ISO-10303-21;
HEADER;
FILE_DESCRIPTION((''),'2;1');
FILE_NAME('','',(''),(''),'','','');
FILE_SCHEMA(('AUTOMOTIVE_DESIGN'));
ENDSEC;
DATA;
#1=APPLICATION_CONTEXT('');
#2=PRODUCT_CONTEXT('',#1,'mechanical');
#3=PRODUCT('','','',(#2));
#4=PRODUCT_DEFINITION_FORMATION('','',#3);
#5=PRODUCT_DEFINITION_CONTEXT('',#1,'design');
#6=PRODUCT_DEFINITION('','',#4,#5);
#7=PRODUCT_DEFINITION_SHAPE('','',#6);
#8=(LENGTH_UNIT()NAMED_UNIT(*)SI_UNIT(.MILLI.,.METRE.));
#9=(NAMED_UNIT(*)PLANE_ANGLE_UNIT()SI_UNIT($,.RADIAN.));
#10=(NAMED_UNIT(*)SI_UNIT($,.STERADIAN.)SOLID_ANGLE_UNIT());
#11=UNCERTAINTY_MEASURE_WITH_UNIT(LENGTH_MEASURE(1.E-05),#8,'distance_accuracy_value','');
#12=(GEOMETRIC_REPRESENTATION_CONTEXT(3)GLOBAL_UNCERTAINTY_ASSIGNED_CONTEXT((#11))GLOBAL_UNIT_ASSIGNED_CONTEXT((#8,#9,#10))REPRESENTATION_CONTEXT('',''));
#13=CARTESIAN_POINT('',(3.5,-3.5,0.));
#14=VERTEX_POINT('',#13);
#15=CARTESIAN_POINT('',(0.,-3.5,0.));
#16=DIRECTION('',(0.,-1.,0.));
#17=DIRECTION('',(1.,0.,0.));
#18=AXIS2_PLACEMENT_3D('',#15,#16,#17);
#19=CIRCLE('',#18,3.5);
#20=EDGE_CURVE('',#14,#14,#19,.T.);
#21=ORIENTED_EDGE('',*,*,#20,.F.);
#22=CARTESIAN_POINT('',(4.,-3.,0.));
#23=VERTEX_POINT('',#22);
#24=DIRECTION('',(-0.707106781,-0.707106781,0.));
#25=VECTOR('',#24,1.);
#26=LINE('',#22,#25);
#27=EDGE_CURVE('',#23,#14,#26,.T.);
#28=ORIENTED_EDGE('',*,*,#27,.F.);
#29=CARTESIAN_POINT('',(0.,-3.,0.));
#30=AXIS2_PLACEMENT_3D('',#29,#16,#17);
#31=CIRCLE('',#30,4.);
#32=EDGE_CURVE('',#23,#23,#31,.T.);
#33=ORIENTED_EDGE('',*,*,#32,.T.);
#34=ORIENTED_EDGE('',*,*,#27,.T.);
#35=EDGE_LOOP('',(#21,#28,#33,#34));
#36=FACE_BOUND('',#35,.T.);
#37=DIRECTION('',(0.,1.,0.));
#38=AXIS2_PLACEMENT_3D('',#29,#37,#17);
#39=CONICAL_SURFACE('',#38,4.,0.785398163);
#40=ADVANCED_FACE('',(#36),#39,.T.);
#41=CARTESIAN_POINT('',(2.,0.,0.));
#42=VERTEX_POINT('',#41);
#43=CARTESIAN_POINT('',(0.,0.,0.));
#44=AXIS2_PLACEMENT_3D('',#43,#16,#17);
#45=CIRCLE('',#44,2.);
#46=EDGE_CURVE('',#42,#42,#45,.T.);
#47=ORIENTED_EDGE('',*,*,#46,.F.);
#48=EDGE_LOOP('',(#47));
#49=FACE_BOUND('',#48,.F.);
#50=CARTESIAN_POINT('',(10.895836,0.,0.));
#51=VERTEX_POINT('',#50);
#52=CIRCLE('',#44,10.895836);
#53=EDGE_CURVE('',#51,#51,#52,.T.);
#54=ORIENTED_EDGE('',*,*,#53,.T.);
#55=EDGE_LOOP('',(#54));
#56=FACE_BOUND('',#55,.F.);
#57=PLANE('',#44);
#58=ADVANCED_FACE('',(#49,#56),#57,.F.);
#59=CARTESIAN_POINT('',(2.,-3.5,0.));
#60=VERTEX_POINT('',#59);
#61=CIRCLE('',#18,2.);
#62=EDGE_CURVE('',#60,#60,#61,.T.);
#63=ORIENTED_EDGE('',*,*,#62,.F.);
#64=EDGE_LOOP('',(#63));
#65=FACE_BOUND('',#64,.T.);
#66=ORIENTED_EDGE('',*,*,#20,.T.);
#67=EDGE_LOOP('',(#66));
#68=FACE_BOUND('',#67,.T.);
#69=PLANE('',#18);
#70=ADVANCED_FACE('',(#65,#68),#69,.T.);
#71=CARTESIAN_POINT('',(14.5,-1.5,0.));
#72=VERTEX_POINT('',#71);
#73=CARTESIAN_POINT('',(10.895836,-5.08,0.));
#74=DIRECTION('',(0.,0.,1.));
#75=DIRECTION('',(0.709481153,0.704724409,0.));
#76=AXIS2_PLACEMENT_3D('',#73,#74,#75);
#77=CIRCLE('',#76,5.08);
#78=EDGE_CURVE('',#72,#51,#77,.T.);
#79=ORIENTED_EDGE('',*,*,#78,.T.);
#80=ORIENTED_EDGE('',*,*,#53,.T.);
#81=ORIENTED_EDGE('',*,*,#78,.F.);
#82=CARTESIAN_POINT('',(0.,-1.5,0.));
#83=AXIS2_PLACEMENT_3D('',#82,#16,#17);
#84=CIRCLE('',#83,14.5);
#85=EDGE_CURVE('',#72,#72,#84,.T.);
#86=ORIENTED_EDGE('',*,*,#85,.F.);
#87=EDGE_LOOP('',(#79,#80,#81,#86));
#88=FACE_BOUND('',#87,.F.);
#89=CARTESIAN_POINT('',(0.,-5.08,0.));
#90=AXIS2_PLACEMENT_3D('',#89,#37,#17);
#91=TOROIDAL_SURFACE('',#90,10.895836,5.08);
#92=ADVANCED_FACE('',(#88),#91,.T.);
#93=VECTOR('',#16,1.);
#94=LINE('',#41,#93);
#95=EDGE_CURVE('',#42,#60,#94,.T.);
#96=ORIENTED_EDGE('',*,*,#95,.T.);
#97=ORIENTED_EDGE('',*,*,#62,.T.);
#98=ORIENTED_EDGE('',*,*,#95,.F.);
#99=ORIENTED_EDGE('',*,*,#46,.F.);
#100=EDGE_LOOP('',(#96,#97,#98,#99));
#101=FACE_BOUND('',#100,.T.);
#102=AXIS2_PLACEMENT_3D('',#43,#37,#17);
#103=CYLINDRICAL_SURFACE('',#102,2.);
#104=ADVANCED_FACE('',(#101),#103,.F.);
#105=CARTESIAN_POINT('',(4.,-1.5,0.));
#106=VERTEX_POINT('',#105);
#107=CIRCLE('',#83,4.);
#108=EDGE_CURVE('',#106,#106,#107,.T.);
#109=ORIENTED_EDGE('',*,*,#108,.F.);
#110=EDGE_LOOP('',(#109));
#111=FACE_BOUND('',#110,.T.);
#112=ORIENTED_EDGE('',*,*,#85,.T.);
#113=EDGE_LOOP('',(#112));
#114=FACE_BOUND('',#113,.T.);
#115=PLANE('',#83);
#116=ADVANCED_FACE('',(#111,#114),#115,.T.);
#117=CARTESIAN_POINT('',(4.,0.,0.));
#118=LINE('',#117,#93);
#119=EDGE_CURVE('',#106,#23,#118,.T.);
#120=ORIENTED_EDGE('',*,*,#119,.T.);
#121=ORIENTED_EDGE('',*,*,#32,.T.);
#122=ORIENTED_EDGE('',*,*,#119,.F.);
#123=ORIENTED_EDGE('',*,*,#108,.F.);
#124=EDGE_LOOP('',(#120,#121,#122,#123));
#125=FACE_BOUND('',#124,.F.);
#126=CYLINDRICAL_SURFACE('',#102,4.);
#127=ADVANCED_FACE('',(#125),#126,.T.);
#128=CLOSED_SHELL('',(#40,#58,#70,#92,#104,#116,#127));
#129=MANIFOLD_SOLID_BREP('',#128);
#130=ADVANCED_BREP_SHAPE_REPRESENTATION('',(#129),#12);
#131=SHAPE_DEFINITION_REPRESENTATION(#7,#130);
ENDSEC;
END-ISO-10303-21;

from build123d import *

# Parameters (mm, degrees)
F0_R     = 14.5
F0_R_2   = 4
F1_DEPTH = 1.5
F0_R_3   = 2
F2_DEPTH = 3.5
F3_SIZE  = 0.5


# Not quite as in the source:
# - a fillet or chamfer that OpenCascade refuses, or shapes differently, is made with other operations: its cross-section is extruded or revolved along the edge and cut away or added


with BuildPart() as f1:
    # F0 (on Front) → F1 (new body)
    with BuildSketch(Plane.XZ):
        Circle(F0_R)
        Circle(F0_R_2, mode=Mode.SUBTRACT)
    extrude(amount=F1_DEPTH)

    # F0 (on Front) → F2 (join)
    with BuildSketch(Plane.XZ):
        Circle(F0_R_2)
        Circle(F0_R_3, mode=Mode.SUBTRACT)
    extrude(amount=F2_DEPTH)

    # F3
    f3_edges = [f1.edges().sort_by_distance(p)[0] for p in [
        (-4, -3.5, 0),
    ]]
    chamfer(f3_edges, length=F3_SIZE)

    # F4: fillet of radius 5.08 on 1 edges, made by hand

    # F4_s1 → F4_t2 (revolve, cut)
    with BuildSketch(Plane.XY):
        with BuildLine():
            ThreePointArc((14.5, -1.5), (12.8477578714, -0.3899680172), (10.8958357418, 0))
            Line((10.8958357418, 0), (14.5, 0))
            Line((14.5, 0), (14.5, -1.5))
        make_face()
    revolve(axis=Axis((0, 0, 0), (0, -1, 0)), mode=Mode.SUBTRACT)


solid = f1.part
